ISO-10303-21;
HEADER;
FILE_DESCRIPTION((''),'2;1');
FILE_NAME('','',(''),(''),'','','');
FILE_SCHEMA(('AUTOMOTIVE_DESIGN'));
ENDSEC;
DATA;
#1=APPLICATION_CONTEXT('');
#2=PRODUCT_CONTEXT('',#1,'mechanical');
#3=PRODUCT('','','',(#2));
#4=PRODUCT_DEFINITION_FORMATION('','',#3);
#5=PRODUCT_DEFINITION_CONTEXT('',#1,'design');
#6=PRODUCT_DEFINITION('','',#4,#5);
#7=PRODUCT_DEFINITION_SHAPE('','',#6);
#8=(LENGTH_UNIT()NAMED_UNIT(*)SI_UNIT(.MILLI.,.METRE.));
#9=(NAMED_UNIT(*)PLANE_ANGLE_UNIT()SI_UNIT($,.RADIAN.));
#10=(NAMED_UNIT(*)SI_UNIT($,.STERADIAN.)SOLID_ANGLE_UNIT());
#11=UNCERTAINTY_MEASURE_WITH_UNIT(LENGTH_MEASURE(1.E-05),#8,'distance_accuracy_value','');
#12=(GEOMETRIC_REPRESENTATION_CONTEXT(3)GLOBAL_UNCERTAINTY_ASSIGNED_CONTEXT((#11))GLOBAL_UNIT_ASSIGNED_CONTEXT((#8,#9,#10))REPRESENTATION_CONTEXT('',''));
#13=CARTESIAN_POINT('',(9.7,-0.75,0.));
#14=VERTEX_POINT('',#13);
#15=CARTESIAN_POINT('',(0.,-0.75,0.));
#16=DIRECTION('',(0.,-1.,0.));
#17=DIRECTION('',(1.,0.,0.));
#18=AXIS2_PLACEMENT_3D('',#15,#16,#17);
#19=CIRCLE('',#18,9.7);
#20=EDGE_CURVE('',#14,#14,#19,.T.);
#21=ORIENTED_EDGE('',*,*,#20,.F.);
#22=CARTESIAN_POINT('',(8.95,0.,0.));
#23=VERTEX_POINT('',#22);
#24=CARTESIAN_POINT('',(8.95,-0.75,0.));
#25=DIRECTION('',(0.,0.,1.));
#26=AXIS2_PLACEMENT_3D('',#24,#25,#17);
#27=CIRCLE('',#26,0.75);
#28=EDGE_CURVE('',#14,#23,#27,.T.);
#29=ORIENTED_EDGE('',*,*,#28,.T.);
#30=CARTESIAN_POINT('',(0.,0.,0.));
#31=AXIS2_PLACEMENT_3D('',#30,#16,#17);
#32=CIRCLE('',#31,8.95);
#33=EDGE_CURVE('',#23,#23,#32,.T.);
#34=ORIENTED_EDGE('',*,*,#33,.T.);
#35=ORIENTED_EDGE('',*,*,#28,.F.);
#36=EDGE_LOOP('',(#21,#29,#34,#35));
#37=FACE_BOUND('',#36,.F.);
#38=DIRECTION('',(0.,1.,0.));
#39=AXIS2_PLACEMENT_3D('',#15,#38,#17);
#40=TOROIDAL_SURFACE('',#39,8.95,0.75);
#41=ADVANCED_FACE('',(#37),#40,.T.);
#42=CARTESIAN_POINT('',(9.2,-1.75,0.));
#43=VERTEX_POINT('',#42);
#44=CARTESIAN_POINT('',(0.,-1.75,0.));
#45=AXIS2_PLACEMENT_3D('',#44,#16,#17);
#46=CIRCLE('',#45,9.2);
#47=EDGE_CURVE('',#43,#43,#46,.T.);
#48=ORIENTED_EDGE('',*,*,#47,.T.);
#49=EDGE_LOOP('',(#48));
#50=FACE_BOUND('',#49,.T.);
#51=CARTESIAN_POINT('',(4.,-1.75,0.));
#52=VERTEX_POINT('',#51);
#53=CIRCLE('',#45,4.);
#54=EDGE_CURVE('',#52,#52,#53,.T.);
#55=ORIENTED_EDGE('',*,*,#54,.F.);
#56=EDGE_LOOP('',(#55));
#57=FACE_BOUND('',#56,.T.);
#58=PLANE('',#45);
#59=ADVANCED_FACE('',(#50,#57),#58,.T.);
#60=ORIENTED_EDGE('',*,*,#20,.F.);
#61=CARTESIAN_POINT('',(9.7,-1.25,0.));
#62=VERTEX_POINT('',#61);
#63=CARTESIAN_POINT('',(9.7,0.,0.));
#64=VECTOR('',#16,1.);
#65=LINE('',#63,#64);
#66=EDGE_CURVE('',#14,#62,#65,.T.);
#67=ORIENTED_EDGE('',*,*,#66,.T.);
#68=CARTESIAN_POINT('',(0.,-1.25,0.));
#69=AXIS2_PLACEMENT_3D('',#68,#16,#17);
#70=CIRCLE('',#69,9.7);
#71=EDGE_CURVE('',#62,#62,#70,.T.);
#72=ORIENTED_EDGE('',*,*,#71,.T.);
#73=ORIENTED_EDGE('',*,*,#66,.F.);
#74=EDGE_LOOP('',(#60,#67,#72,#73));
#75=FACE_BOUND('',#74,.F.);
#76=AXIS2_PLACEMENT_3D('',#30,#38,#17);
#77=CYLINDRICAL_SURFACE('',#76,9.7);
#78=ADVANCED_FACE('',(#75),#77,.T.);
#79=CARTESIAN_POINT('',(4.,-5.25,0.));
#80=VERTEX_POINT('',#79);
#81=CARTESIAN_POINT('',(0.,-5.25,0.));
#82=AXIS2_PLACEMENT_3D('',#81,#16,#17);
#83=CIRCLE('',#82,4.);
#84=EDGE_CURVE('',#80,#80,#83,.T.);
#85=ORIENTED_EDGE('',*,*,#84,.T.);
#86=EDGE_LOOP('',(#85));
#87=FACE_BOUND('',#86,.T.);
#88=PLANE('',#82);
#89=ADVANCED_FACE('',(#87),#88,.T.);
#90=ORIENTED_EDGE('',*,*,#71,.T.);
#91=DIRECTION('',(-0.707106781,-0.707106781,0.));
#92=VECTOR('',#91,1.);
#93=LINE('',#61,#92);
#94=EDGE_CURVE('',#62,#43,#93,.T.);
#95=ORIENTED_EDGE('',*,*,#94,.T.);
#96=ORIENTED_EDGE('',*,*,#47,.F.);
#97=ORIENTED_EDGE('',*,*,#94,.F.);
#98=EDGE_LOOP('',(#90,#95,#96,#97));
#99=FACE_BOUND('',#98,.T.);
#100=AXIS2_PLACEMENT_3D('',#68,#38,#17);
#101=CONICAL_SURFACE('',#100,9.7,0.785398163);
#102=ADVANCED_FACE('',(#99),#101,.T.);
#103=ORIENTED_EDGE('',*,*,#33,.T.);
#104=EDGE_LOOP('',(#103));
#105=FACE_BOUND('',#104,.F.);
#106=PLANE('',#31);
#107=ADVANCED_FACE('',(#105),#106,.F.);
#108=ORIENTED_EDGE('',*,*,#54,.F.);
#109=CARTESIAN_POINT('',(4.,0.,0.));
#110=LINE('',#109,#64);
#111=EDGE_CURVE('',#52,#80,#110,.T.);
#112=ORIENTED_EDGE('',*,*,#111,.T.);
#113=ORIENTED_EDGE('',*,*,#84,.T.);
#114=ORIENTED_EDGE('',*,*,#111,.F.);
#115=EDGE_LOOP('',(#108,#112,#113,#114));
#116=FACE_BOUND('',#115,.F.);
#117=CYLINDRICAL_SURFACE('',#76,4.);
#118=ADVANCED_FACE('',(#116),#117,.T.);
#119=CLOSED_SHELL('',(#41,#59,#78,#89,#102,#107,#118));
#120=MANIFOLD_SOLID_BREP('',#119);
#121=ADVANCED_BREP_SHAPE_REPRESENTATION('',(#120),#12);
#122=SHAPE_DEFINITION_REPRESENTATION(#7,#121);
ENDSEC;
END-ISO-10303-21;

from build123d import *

# Parameters (mm, degrees)
F0_R     = 4
F1_DEPTH = 5.25
F0_R_2   = 9.7
F2_DEPTH = 1.75
F3_SIZE  = 0.5
F4_R     = 0.75


# Not quite as in the source:
# - a feature names something its author has since deleted; it is built from what else it names


with BuildPart() as f1:
    # F0 (on Front) → F1 (new body)
    with BuildSketch(Plane.XZ):
        Circle(F0_R)
    extrude(amount=F1_DEPTH)

    # F0 (on Front) → F2 (join)
    with BuildSketch(Plane.XZ):
        Circle(F0_R_2)
        Circle(F0_R, mode=Mode.SUBTRACT)
    extrude(amount=F2_DEPTH)

    # F3
    f3_edges = [f1.edges().sort_by_distance(p)[0] for p in [
        (-9.7, -1.75, 0),
    ]]
    chamfer(f3_edges, length=F3_SIZE)

    # F4
    f4_edges = [f1.edges().sort_by_distance(p)[0] for p in [
        (-9.7, 0, 0),
    ]]
    fillet(f4_edges, radius=F4_R)


solid = f1.part
